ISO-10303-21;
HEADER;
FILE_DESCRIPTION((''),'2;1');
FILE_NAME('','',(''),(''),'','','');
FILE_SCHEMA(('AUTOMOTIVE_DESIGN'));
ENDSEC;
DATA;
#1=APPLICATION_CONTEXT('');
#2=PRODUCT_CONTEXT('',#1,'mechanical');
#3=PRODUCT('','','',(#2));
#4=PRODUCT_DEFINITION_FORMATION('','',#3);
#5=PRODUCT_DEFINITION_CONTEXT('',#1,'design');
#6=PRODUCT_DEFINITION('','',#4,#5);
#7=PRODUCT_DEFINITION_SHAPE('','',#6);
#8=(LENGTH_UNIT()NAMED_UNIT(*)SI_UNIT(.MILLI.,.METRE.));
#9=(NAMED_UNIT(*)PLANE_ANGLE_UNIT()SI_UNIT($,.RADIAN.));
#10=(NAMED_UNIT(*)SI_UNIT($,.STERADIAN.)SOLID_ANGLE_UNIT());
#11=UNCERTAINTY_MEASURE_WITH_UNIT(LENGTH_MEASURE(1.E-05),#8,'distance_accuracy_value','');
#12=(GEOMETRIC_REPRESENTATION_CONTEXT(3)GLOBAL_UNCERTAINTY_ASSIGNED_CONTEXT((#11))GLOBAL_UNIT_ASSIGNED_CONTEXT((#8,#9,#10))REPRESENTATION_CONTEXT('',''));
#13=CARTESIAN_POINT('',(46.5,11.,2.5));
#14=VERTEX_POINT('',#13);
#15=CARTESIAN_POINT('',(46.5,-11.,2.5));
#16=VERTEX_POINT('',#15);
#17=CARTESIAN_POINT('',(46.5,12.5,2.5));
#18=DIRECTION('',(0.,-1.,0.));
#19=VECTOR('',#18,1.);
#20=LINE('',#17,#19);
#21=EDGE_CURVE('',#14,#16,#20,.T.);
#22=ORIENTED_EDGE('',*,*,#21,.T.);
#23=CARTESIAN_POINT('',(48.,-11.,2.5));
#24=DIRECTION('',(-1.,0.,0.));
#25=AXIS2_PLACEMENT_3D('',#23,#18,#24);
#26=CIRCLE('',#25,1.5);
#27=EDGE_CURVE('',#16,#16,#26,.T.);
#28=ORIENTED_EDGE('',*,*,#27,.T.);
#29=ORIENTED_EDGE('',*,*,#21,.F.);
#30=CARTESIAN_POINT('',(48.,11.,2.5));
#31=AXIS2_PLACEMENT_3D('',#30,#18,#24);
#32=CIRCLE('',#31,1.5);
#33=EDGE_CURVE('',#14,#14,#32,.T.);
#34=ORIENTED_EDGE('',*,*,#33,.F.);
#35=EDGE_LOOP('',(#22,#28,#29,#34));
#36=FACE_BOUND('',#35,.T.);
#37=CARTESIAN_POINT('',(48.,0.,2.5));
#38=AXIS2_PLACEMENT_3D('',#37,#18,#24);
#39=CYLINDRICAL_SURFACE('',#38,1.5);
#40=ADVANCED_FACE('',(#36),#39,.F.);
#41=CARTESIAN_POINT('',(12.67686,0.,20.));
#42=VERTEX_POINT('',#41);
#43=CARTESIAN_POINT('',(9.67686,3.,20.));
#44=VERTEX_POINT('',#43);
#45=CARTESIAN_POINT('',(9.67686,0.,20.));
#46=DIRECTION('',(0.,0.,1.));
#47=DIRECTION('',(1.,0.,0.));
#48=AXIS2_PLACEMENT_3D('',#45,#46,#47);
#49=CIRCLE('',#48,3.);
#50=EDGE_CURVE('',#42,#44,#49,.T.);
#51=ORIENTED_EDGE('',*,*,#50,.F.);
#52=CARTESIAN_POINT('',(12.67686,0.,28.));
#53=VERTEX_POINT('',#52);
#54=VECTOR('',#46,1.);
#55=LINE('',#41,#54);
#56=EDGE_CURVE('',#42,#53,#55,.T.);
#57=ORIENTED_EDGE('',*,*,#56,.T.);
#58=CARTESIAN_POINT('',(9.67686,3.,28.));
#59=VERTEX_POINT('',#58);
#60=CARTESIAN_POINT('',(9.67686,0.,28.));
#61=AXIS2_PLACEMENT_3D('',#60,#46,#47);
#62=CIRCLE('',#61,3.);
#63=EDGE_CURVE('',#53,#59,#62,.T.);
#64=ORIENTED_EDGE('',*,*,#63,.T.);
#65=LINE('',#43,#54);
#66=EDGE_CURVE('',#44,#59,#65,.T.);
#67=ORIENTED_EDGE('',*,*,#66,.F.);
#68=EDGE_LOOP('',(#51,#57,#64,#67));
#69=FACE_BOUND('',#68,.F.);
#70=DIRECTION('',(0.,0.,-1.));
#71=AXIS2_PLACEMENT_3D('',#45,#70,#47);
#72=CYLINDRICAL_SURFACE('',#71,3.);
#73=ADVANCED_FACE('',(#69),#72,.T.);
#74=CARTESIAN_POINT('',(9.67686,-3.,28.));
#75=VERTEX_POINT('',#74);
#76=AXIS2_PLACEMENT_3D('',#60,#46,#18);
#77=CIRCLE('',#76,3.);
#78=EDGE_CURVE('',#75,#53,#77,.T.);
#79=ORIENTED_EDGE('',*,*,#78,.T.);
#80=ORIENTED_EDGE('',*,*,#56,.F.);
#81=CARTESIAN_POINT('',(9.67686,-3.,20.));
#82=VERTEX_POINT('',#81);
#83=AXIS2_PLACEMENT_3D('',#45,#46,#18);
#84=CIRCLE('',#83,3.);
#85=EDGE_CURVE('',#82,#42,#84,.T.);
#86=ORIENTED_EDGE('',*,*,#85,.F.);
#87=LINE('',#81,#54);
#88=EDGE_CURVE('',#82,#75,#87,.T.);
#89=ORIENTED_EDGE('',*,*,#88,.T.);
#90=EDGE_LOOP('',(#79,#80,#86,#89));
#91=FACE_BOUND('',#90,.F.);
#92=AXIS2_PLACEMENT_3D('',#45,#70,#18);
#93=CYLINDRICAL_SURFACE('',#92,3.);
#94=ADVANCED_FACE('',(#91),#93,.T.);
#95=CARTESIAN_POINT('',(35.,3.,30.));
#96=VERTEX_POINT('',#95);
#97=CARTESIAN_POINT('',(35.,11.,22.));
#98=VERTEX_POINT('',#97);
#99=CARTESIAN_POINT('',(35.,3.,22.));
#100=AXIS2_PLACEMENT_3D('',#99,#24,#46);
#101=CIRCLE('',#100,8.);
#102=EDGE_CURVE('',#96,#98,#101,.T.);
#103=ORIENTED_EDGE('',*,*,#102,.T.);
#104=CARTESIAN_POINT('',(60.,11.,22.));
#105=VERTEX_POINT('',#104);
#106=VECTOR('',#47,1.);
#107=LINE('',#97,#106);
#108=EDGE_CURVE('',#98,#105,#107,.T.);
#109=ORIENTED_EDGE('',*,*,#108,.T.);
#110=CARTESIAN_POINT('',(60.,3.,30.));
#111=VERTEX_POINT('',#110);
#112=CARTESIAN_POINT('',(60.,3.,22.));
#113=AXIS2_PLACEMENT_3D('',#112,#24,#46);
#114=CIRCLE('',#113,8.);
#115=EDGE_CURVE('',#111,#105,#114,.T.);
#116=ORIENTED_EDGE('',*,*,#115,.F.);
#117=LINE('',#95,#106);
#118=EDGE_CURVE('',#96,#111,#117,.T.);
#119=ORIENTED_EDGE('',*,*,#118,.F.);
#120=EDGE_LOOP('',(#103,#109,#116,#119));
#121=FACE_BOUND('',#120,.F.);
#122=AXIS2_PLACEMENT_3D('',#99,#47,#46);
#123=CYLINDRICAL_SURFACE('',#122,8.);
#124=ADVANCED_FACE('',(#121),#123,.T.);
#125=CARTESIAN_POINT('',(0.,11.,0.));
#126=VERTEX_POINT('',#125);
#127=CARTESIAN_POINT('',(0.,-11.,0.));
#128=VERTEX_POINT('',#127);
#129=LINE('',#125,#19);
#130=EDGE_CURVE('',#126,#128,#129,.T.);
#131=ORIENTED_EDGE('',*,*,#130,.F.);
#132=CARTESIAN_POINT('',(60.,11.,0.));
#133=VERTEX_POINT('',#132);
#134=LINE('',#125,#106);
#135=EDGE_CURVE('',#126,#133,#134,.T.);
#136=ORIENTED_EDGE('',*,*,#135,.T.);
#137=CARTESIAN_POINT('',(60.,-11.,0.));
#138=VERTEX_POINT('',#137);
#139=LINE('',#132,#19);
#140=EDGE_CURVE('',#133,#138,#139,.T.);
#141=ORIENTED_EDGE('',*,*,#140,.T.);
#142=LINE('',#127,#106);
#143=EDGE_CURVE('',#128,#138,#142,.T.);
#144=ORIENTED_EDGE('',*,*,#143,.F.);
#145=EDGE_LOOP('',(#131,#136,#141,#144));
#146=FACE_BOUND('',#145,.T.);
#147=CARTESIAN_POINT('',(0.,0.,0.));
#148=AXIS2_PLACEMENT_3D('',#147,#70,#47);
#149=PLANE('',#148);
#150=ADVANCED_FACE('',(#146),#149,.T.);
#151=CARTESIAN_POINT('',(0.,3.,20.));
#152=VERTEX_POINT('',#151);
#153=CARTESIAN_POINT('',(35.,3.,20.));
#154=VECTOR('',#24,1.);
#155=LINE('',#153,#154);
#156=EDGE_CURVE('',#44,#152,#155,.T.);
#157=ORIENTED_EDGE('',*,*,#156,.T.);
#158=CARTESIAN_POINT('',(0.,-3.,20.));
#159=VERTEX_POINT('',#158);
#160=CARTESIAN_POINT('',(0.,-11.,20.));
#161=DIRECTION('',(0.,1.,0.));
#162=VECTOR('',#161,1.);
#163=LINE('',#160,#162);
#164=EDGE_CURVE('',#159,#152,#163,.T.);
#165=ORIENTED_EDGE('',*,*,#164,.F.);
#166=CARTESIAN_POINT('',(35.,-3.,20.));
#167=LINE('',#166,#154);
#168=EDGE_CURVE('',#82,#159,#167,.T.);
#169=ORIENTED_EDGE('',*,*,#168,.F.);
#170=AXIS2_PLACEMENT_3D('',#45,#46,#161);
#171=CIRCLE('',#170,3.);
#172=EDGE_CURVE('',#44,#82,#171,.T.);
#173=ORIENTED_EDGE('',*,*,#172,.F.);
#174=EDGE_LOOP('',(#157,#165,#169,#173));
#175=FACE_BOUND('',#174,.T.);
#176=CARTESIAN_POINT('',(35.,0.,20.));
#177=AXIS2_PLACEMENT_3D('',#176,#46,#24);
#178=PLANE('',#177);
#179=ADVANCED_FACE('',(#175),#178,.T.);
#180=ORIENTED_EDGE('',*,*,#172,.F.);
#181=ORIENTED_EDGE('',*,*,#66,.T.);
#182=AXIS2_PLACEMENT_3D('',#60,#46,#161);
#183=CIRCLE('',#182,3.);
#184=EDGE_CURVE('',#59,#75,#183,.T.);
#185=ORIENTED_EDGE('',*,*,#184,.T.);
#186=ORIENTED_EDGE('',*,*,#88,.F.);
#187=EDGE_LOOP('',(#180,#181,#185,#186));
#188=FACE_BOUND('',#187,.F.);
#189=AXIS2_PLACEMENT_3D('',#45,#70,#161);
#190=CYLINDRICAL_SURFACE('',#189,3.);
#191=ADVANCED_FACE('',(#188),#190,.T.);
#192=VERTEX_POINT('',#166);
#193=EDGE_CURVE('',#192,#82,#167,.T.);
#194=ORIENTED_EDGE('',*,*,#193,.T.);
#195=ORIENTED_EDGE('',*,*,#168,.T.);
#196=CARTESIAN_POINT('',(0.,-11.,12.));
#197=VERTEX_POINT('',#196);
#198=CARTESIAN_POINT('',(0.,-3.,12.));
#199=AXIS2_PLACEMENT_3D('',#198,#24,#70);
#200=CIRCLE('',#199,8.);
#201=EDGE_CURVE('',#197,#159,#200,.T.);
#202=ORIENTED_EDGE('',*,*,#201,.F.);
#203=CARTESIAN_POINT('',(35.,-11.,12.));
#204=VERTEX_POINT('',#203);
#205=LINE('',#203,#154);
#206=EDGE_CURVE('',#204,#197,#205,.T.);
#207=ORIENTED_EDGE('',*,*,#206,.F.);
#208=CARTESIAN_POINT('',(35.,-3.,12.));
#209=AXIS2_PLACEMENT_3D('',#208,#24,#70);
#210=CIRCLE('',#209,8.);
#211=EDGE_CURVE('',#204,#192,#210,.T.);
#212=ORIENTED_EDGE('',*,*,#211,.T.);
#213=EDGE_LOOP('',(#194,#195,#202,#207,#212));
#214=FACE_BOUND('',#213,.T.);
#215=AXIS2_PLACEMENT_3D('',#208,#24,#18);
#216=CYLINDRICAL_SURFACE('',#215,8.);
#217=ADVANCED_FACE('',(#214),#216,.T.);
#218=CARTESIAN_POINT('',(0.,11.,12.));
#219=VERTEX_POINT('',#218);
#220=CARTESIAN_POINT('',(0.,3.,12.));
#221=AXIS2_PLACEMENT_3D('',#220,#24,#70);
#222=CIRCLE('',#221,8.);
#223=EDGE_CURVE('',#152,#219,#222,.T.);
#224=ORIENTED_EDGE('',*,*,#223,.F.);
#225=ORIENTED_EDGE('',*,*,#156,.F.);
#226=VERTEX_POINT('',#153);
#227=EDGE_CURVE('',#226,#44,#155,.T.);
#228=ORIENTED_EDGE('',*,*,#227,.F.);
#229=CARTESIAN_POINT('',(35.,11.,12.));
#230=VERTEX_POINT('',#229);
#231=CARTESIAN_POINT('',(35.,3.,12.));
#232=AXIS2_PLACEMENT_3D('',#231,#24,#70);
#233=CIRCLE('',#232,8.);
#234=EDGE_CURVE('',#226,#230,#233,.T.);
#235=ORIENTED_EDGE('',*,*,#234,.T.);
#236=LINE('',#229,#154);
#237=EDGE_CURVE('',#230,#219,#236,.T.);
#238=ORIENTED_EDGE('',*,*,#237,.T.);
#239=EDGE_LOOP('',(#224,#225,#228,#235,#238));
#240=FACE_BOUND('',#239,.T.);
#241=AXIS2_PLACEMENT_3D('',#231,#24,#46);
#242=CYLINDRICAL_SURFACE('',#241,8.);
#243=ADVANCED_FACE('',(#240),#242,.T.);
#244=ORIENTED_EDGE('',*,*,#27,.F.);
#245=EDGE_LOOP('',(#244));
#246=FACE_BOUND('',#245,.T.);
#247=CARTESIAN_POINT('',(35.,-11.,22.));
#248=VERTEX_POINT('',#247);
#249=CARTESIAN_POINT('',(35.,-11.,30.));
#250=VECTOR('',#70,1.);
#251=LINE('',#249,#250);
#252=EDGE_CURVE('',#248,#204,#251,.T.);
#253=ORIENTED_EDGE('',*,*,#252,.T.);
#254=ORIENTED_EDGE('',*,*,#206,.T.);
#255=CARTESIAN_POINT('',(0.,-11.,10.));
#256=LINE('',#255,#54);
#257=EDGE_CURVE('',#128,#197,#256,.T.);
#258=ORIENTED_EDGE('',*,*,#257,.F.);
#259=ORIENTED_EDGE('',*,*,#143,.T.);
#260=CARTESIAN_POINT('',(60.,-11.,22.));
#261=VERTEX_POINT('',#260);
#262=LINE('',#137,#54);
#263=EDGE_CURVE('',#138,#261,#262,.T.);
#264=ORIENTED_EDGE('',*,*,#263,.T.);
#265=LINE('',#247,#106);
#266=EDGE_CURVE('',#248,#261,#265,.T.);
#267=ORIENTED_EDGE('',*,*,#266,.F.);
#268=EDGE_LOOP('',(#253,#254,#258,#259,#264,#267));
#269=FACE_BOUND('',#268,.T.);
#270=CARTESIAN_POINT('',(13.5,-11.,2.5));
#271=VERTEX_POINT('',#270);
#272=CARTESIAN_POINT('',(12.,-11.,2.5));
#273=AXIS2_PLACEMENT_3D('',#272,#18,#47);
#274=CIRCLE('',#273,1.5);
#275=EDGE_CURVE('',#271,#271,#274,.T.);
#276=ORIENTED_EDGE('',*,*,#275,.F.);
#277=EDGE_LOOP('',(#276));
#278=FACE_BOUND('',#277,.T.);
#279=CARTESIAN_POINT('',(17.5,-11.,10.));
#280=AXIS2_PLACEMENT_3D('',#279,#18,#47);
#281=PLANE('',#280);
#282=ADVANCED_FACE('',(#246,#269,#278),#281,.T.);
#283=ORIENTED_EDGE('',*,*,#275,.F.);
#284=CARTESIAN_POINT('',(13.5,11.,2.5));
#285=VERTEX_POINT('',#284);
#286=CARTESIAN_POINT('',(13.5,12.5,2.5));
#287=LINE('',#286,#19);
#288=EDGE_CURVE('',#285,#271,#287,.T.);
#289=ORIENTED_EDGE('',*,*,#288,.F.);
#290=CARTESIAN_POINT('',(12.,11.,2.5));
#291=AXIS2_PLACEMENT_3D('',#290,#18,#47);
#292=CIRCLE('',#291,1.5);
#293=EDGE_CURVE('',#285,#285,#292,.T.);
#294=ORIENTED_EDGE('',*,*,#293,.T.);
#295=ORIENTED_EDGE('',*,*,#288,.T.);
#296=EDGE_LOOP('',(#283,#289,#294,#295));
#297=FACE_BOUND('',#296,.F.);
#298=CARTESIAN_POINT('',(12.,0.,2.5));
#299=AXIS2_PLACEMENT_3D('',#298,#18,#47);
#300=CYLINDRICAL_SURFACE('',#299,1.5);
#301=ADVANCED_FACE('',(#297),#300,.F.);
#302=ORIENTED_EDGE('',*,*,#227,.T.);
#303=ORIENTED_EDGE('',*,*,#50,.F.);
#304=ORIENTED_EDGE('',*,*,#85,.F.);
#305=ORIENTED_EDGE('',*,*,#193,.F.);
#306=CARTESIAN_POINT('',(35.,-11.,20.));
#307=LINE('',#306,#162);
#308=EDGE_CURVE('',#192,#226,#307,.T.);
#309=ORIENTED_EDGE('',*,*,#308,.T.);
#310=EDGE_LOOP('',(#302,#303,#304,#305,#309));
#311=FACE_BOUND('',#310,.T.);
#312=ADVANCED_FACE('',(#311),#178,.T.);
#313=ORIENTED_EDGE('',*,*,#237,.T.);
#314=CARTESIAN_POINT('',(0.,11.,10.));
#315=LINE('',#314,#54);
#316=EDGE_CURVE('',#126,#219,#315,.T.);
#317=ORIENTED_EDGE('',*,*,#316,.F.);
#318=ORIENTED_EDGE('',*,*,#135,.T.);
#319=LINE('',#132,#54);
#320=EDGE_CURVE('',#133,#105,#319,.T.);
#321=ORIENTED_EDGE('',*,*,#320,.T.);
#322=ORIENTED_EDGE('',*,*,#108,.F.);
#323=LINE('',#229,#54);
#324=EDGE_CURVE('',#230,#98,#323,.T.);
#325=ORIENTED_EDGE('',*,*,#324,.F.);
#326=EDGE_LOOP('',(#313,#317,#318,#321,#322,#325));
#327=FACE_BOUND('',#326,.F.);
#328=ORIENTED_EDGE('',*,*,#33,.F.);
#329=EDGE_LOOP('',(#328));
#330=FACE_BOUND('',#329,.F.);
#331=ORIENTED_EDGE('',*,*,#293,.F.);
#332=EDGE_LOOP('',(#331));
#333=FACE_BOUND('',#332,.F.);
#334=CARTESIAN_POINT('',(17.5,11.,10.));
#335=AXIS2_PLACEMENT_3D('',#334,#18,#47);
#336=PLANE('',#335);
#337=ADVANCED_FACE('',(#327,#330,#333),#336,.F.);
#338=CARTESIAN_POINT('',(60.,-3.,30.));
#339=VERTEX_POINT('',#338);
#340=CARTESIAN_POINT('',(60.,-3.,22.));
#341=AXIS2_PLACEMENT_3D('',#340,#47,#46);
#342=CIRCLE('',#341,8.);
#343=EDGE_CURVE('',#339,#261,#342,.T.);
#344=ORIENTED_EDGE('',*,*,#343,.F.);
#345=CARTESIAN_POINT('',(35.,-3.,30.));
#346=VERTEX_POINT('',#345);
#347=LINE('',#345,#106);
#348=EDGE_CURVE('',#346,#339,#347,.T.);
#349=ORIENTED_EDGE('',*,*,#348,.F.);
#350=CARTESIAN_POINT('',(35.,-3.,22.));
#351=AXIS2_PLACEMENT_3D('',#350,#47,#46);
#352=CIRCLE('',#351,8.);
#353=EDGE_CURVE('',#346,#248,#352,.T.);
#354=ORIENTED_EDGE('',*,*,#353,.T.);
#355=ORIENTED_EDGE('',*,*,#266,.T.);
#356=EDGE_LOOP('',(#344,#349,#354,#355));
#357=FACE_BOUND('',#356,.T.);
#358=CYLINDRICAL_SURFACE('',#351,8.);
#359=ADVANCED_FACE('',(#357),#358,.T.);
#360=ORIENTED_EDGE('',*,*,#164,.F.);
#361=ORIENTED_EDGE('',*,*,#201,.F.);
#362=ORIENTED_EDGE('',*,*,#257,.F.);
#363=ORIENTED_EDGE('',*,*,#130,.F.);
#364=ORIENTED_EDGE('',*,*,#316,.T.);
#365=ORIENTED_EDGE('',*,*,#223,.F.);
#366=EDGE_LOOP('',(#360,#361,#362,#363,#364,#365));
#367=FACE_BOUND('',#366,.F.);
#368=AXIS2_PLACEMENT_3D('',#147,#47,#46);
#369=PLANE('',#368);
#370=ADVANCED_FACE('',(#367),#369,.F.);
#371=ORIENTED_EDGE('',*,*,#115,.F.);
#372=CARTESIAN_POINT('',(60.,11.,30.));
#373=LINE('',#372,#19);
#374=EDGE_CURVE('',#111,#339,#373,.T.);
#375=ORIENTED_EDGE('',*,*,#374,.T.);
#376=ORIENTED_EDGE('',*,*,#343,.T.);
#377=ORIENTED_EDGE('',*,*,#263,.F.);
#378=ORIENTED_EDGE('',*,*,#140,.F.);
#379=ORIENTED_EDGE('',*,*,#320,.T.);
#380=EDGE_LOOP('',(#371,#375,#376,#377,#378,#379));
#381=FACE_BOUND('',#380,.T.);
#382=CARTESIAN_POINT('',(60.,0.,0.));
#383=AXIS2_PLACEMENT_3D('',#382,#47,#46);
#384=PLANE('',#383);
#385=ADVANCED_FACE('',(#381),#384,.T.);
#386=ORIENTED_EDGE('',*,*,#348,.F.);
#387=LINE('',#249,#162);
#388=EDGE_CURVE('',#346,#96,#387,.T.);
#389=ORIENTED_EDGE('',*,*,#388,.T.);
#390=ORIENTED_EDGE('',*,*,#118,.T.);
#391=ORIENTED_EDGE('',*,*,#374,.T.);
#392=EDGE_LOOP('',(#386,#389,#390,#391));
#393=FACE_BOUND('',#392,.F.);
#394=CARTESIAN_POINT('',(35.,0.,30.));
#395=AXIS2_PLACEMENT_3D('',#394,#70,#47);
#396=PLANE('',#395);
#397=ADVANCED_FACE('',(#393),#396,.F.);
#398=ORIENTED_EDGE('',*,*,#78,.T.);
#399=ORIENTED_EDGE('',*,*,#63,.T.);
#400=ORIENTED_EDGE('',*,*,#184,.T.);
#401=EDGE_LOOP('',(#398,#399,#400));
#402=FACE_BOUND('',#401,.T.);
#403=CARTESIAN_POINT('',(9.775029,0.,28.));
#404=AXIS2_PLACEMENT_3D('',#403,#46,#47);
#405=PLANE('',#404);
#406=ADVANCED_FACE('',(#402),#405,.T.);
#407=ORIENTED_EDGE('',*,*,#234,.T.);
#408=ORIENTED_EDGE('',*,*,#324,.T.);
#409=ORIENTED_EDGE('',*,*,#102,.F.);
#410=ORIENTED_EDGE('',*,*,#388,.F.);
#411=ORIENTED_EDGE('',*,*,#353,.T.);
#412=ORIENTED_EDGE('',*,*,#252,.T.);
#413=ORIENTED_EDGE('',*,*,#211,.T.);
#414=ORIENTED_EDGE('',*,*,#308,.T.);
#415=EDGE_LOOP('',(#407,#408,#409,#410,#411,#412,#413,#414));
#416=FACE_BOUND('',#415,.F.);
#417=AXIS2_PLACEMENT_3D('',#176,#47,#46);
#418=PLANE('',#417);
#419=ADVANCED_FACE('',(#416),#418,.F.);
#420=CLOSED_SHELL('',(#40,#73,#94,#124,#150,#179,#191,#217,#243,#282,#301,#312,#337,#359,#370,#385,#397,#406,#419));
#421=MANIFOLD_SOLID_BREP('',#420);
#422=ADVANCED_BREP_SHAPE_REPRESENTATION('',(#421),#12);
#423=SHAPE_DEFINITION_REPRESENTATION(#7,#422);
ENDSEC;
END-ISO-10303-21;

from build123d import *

# Parameters (mm, degrees)
F0_W     = 35
F0_H     = 20
F0_W_2   = 25
F0_H_2   = 10
F1_DEPTH = 11
F2_R     = 8
F3_R     = 8
F5_DEPTH = 8
F6_R     = 1.5
F7_DEPTH = 12.5


# Not quite as in the source:
# - a pattern or mirror of a feature is missing from the dataset's text; its kind, count and spacing are read off the source's solid


with BuildPart() as f1:
    # F0 (on Front) → F1 (new body, symmetric)
    with BuildSketch(Plane.XZ):
        with Locations((17.5, 10)):
            Rectangle(F0_W, F0_H)
        with Locations((47.5, 10)):
            Rectangle(F0_W_2, F0_H)
        with Locations((47.5, 25)):
            Rectangle(F0_W_2, F0_H_2)
    extrude(amount=F1_DEPTH, both=True)

    # F2
    f2_edges = [f1.edges().sort_by_distance(p)[0] for p in [
        (17.5, -11, 20),
        (17.5, 11, 20),
    ]]
    fillet(f2_edges, radius=F2_R)

    # F3
    f3_edges = [f1.edges().sort_by_distance(p)[0] for p in [
        (47.5, -11, 30),
        (47.5, 11, 30),
    ]]
    fillet(f3_edges, radius=F3_R)

    # F4 (on face) → F5 (join)
    with BuildSketch(Plane.XY.offset(20)):
        with BuildLine():
            ThreePointArc((9.6768597141, -3), (11.7981800577, -2.1213203436), (12.6768597141, 0))
            ThreePointArc((12.6768597141, 0), (11.7981800577, 2.1213203436), (9.6768597141, 3))
            ThreePointArc((9.6768597141, 3), (6.6768597141, 0), (9.6768597141, -3))
        make_face()
    extrude(amount=F5_DEPTH)

    # F6 (on Front) → F7 (cut, symmetric)
    with BuildSketch(Plane.XZ):
        with Locations((12, 2.5)):
            Circle(F6_R)
    f7 = extrude(amount=F7_DEPTH, both=True, mode=Mode.SUBTRACT)

    # F7_copies: F7 across plane
    add(f7.mirror(Plane(origin=(30, 0, 0), x_dir=(0, 0, 1), z_dir=(1, 0, 0))), mode=Mode.SUBTRACT)


solid = f1.part
